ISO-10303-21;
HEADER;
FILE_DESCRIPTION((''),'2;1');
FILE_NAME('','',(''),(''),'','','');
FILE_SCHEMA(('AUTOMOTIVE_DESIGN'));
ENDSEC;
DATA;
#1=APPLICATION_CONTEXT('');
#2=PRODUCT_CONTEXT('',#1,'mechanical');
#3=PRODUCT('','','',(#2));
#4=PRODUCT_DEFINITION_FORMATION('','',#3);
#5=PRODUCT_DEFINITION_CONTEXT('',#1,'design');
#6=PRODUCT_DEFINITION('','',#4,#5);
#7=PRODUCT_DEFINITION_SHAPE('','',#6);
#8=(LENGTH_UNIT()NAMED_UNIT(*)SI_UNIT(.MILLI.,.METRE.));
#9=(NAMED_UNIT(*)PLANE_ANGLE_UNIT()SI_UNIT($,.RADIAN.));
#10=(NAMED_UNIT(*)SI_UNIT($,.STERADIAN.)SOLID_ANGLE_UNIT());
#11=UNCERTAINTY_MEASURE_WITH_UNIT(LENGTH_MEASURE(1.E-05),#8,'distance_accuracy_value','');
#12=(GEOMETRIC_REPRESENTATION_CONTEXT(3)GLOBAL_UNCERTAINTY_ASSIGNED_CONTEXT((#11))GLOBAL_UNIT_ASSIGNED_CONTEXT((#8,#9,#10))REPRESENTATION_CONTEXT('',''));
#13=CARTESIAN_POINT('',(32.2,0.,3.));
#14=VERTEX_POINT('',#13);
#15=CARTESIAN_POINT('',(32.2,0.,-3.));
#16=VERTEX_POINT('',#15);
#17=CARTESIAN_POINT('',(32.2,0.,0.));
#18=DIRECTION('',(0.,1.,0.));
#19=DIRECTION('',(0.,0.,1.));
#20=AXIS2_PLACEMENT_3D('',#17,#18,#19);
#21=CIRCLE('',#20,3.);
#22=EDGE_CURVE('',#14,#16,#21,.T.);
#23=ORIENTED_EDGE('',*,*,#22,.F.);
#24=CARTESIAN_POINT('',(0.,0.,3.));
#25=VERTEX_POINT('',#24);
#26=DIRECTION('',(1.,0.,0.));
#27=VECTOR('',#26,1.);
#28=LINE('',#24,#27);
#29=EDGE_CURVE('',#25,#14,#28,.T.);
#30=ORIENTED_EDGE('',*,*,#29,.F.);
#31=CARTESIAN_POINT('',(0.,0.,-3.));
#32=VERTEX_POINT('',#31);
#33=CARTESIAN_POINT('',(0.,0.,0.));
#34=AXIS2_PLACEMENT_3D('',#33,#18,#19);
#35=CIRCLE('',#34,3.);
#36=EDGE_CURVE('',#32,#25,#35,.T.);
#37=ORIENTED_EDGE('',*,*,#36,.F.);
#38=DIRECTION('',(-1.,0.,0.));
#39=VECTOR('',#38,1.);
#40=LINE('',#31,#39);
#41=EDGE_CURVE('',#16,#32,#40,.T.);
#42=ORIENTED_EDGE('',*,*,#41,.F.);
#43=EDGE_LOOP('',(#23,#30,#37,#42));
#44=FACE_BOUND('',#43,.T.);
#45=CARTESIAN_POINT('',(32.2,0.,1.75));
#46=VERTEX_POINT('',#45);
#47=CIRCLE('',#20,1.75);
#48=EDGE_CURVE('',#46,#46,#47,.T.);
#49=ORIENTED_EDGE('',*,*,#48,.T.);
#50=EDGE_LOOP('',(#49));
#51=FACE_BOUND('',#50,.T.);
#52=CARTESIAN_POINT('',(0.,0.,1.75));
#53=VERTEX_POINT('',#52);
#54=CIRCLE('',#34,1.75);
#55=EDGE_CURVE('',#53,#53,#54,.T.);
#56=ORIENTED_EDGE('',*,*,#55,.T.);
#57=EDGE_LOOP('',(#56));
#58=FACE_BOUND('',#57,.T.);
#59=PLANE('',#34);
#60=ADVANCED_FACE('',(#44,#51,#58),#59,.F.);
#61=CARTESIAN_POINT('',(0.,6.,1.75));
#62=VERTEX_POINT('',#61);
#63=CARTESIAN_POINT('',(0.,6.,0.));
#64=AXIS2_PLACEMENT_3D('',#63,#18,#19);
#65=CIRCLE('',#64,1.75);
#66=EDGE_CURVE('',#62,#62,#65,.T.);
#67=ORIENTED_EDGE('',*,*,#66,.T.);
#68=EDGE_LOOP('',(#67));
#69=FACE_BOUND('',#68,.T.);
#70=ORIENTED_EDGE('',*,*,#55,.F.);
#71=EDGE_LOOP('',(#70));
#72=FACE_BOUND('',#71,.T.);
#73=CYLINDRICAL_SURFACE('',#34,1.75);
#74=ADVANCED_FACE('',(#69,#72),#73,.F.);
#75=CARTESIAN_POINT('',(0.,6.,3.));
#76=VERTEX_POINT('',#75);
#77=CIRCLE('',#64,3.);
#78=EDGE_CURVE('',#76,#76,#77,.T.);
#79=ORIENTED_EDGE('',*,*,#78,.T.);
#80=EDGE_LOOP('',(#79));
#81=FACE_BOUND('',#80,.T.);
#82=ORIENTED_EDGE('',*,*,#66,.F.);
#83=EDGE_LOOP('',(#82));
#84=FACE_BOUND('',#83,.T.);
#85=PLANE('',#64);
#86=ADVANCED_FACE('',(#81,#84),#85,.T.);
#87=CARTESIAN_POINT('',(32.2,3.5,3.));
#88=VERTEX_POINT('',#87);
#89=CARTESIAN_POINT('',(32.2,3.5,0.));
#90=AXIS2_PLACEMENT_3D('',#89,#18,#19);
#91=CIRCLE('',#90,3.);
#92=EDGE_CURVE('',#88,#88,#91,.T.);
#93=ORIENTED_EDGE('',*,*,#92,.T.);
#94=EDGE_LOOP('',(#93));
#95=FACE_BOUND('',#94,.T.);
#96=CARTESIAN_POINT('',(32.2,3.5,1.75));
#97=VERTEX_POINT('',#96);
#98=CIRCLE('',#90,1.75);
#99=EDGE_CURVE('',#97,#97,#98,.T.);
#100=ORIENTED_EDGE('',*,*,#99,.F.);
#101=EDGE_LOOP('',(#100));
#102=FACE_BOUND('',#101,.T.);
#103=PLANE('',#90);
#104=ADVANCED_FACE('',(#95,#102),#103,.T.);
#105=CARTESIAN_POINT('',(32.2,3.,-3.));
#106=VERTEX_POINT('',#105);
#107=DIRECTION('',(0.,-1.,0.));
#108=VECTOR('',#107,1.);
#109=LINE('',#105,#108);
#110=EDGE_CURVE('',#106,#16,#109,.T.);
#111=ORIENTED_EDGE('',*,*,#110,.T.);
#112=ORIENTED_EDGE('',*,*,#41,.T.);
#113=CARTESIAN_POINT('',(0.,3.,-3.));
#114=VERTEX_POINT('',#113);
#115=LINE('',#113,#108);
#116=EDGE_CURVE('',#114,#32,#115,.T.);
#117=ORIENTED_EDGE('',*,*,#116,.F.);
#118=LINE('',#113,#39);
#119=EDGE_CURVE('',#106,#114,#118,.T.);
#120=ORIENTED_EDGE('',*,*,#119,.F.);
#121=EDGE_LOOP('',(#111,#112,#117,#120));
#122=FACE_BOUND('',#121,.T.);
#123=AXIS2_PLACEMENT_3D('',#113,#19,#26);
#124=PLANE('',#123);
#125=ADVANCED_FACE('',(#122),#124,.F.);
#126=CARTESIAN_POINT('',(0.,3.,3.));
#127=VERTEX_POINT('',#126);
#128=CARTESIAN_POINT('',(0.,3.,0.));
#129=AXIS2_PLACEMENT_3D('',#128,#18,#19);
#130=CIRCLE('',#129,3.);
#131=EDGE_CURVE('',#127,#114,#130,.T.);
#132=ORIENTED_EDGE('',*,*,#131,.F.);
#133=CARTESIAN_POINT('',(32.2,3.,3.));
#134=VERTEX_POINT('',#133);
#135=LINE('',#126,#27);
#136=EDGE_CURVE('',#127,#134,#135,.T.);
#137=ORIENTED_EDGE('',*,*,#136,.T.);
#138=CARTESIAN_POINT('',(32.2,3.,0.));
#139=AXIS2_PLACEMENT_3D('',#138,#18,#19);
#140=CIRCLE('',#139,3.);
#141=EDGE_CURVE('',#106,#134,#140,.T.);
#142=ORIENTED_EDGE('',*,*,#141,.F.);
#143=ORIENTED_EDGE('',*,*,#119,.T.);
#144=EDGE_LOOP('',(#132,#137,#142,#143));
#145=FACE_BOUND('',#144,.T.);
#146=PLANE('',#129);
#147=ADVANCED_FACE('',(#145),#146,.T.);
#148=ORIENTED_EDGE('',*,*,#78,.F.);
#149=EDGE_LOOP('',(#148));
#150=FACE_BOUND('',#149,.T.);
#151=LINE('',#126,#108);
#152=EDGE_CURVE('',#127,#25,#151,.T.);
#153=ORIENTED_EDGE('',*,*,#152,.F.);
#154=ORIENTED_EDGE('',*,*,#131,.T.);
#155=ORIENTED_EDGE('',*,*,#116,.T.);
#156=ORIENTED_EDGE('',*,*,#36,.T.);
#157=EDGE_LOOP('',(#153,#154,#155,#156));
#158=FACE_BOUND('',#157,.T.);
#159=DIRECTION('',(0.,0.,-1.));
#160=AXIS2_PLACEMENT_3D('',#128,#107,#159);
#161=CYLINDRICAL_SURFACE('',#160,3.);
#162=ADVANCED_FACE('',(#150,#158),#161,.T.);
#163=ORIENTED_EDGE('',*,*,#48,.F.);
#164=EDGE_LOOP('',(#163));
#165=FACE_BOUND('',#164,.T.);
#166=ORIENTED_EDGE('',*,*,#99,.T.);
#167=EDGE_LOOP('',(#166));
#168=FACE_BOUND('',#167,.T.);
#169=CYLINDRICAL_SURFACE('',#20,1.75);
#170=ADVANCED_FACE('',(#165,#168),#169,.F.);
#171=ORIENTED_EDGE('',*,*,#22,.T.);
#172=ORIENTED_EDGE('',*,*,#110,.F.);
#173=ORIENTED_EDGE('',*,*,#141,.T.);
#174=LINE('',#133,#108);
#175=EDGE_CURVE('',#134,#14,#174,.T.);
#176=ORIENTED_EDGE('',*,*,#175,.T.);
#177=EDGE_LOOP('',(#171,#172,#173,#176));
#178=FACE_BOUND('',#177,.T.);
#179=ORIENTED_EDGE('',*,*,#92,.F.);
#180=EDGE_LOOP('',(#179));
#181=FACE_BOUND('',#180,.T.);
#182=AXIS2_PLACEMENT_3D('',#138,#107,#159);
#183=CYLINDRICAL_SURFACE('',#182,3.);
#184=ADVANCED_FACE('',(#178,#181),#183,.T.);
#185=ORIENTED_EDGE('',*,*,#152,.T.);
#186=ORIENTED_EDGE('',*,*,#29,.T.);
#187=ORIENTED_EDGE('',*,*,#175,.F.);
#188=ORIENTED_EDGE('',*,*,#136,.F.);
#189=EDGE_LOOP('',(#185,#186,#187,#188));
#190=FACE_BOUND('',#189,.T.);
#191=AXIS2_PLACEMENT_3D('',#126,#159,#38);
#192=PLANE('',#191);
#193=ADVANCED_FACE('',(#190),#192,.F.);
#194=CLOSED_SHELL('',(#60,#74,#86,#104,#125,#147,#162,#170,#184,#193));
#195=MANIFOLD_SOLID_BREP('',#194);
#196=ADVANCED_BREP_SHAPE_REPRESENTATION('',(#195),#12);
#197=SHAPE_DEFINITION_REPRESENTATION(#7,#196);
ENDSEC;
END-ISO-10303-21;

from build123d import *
from build123d.topology import SkipClean

# Parameters (mm, degrees)
EXTRUDE_1_DEPTH     = 3
SKETCH_2_R          = 3
EXTRUDE_2_DEPTH     = 0.5
SKETCH_3_R          = 3
EXTRUDE_3_DEPTH     = 3
SKETCH_4_R          = 1.75
CUT_EXTRUDE_1_DEPTH = 36.833503876


with BuildPart() as part:
    # Эскиз1 → Бобышка-Вытянуть1 (new body)
    with BuildSketch(Plane(origin=(0, 0, 0), x_dir=(1, 0, 0), z_dir=(0, 1, 0))):
        with BuildLine():
            Line((0, 3), (32.2, 3))
            ThreePointArc((32.2, 3), (35.2, 0), (32.2, -3))
            Line((32.2, -3), (0, -3))
            ThreePointArc((0, -3), (-3, 0), (0, 3))
        make_face()
    extrude(amount=EXTRUDE_1_DEPTH)

    # Эскиз2 → Бобышка-Вытянуть2 (add)
    with SkipClean():  # the faces are left unmerged after this step: merging them gives an invalid solid
        with BuildSketch(Plane(origin=(0, 3, 0), x_dir=(1, 0, 0), z_dir=(0, 1, 0))):
            with Locations((32.2, 0)):
                Circle(SKETCH_2_R)
        extrude(amount=EXTRUDE_2_DEPTH)
    add(part.part.scale(1), mode=Mode.REPLACE)  # the faces are merged on a copy

    # Эскиз3 → Бобышка-Вытянуть3 (add)
    with BuildSketch(Plane(origin=(0, 3, 0), x_dir=(1, 0, 0), z_dir=(0, 1, 0))):
        Circle(SKETCH_3_R)
    extrude(amount=EXTRUDE_3_DEPTH)

    # Эскиз4 → Вырез-Вытянуть1 (cut, through all)
    with BuildSketch(Plane(origin=(0, 6, 0), x_dir=(1, 0, 0), z_dir=(0, 1, 0))):
        Circle(SKETCH_4_R)
        with Locations((32.2, 0)):
            Circle(SKETCH_4_R)
    extrude(amount=-CUT_EXTRUDE_1_DEPTH, mode=Mode.SUBTRACT)


solid = part.part
